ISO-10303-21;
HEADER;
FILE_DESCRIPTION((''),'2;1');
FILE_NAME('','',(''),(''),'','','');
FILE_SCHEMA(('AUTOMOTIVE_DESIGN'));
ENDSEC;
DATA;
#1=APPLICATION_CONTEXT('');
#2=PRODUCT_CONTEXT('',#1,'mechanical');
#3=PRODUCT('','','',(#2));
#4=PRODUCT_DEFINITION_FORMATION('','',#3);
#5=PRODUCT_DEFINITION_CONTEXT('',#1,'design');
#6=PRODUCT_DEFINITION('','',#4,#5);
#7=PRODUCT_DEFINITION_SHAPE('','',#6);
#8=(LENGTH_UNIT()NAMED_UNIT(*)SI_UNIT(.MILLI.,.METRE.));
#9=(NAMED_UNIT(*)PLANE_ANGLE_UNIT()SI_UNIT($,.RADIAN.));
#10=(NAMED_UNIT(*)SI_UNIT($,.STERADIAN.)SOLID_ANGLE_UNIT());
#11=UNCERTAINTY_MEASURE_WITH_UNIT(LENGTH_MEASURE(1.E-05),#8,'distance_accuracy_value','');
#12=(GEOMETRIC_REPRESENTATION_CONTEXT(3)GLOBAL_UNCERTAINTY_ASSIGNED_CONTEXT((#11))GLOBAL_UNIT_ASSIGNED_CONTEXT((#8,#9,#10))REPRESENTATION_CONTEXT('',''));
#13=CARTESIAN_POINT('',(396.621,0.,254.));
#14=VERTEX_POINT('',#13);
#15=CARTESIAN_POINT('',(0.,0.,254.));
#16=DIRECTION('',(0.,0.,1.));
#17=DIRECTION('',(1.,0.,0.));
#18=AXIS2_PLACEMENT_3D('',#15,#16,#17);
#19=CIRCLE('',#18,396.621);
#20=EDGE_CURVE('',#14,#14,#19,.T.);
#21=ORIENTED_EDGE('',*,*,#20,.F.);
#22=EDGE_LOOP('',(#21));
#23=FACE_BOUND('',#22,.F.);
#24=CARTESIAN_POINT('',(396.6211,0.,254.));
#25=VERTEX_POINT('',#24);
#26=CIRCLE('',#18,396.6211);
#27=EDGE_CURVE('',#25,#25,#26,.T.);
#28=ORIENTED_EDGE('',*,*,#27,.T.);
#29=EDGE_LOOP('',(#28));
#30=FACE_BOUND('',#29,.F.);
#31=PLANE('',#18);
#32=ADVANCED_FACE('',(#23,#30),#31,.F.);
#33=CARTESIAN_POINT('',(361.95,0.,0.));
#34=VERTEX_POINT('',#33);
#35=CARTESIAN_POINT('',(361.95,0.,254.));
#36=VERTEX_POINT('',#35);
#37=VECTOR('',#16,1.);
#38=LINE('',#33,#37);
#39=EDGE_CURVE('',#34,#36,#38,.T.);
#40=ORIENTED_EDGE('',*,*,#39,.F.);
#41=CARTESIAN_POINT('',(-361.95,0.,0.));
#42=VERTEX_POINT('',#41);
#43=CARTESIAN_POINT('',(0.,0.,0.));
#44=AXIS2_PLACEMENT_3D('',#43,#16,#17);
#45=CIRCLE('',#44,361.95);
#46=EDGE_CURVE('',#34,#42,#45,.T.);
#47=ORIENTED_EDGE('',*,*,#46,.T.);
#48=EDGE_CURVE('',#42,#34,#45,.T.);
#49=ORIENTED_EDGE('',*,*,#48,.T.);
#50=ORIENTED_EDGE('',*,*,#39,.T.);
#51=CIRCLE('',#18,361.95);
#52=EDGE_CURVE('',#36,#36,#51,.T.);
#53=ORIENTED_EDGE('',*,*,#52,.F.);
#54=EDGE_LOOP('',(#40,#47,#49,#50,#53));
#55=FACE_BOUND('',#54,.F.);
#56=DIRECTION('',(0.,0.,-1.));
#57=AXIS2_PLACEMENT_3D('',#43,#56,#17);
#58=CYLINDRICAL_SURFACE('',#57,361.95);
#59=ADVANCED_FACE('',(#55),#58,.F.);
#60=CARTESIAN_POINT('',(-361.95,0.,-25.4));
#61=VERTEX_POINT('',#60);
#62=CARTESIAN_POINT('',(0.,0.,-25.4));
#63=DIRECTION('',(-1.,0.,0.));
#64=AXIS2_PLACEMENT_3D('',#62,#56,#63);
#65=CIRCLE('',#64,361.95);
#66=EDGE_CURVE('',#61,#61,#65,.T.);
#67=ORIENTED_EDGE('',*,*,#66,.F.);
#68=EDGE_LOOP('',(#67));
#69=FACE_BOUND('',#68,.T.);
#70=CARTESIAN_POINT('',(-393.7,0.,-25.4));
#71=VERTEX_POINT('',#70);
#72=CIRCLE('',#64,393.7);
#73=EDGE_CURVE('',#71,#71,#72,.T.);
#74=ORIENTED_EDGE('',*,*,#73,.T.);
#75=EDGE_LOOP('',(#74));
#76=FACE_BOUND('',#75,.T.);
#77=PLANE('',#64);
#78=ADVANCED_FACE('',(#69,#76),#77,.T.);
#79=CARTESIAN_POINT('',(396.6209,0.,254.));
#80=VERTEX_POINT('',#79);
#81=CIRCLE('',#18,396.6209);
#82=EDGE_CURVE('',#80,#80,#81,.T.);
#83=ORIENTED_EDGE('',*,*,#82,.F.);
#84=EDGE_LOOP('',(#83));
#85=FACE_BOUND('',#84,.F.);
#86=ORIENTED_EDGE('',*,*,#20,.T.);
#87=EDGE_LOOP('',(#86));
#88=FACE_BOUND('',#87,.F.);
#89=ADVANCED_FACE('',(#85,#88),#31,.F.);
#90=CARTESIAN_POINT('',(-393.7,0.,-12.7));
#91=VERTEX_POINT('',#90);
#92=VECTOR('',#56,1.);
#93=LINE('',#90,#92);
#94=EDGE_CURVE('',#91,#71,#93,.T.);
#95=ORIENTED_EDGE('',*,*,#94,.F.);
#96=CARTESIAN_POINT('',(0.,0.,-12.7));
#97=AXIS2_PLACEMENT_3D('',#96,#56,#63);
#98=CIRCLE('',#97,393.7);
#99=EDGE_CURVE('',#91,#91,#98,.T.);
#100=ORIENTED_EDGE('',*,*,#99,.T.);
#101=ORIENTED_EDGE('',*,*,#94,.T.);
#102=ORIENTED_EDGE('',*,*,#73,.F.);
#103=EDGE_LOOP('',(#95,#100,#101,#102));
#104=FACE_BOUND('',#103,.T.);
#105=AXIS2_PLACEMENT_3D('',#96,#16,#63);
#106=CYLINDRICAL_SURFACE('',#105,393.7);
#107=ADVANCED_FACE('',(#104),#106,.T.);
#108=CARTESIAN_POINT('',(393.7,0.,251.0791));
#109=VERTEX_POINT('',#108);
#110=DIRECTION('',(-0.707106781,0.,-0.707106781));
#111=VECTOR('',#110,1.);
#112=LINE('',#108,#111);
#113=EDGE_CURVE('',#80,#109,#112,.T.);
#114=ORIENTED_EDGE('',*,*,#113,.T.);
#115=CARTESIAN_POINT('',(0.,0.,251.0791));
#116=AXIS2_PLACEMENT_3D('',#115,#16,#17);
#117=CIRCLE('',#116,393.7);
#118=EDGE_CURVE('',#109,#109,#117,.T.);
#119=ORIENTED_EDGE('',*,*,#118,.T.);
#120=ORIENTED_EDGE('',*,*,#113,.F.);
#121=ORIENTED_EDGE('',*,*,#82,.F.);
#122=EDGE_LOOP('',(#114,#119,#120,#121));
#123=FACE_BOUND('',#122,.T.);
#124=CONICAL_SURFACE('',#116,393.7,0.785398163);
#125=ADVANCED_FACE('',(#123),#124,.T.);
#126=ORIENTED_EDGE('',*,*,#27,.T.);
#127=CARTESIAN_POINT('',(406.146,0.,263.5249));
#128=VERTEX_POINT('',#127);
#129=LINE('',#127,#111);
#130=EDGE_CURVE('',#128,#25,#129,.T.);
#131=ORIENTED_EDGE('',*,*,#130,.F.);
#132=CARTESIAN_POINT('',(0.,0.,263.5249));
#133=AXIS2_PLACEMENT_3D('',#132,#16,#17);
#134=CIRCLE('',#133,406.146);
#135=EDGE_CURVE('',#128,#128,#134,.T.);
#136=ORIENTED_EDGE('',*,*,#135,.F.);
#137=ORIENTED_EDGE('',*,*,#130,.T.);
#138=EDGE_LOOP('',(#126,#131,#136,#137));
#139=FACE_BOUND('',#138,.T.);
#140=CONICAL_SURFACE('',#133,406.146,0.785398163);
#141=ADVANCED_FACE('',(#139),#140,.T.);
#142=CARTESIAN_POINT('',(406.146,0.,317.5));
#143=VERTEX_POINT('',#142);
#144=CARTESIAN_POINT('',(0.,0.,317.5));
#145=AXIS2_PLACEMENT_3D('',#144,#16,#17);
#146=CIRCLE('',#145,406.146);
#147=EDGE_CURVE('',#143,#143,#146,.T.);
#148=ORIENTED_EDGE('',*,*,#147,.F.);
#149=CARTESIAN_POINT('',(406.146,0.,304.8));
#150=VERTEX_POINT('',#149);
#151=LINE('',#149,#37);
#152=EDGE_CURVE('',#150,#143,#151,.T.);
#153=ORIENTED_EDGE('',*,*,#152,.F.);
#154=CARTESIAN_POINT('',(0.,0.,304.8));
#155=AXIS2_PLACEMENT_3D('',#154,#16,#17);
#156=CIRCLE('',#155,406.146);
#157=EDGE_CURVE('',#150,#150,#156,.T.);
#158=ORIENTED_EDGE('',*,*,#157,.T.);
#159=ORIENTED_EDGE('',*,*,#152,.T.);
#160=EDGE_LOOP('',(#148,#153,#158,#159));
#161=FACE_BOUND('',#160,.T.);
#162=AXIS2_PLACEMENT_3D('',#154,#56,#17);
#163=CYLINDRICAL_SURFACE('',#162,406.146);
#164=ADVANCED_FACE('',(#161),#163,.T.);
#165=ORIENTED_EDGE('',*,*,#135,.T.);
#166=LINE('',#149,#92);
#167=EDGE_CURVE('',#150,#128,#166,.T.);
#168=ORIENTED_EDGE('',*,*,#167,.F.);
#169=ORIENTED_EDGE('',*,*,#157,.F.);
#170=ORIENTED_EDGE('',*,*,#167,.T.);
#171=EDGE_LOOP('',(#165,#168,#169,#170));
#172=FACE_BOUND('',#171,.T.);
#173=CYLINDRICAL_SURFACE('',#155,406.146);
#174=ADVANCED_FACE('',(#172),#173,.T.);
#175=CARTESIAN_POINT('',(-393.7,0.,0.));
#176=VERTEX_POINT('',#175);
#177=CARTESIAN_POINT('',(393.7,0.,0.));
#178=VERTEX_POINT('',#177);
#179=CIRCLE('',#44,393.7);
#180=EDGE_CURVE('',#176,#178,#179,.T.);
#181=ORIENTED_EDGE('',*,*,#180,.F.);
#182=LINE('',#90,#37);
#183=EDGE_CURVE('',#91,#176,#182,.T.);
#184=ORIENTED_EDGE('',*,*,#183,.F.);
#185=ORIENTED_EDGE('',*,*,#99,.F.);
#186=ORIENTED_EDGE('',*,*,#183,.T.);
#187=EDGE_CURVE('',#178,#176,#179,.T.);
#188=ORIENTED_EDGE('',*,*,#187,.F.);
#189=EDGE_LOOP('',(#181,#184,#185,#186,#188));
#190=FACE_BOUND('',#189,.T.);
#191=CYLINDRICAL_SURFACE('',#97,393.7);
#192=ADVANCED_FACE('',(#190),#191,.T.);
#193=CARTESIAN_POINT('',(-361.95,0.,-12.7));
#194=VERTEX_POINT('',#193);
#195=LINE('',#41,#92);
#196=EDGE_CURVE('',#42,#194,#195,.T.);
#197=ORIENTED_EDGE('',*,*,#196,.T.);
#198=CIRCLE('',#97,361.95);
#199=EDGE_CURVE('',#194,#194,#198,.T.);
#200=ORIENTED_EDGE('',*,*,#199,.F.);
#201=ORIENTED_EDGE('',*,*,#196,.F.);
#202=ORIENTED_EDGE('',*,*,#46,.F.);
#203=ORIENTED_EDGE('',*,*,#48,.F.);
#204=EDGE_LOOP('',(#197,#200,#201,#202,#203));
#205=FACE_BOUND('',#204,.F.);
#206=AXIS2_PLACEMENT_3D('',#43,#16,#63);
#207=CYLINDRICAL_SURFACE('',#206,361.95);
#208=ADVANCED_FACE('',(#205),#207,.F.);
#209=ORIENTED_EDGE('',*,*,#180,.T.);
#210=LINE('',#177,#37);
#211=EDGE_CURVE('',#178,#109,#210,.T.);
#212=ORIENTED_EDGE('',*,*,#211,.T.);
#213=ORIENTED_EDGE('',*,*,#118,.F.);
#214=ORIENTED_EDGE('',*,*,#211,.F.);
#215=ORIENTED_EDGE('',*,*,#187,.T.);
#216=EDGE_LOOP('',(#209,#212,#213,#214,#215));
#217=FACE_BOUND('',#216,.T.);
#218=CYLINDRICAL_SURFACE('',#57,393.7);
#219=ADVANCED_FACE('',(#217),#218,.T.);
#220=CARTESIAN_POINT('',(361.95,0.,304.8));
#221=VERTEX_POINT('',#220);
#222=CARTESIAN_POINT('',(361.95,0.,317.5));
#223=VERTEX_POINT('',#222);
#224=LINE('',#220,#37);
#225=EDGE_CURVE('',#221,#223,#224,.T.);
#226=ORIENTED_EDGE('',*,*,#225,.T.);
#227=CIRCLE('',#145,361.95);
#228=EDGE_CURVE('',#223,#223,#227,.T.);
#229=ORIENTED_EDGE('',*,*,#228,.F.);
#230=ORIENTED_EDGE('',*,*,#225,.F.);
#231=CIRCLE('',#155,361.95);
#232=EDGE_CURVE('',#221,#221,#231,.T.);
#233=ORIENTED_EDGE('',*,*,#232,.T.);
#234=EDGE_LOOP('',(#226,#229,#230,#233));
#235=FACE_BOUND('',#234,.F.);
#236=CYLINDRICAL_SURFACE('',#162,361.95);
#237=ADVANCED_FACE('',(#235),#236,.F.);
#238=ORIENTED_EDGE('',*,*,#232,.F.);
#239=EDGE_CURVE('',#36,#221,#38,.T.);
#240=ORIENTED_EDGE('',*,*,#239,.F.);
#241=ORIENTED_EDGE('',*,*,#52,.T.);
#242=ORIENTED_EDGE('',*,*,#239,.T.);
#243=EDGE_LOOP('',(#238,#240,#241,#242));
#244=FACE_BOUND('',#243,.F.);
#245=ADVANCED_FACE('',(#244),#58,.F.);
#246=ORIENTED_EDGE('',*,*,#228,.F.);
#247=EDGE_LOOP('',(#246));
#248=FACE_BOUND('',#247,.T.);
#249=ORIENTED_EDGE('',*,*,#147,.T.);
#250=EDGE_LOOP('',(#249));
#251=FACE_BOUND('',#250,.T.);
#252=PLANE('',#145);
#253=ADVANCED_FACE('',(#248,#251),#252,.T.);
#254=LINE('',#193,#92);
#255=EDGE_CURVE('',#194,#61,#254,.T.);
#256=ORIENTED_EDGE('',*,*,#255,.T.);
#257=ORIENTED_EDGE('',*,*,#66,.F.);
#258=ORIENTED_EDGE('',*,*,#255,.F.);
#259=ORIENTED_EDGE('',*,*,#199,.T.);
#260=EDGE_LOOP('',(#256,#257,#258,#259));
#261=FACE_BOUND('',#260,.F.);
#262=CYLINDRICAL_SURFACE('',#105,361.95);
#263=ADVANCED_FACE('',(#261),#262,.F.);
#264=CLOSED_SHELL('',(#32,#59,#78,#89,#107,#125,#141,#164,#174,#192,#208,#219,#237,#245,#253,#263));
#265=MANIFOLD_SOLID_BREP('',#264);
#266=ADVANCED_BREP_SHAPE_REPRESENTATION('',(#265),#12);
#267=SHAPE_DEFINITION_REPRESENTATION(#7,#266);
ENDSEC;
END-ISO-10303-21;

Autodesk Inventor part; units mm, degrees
ref_plane "YZ Plane" through (0, 0, 0) normal (1, 0, 0) x (0, 1, 0)
ref_plane "XZ Plane" through (0, 0, 0) normal (0, 1, 0) x (-1, 0, 0)
ref_plane "XY Plane" through (0, 0, 0) normal (0, 0, 1) x (1, 0, 0)
sketch "Sketch1" plane through (0, 0, 0) normal (0, 0, 1) x (1, 0, 0)
  circle A0 centre (0, 0) radius 361.95
  circle A1 centre (0, 0) radius 393.7
  dimension "d0" = 723.9
  dimension "d1" = 787.4
extrude "Extrusion1" add sketch "Sketch1" along normal blind 304.8
sketch "Sketch2" plane through (0, 0, 304.8) normal (0, 0, 1) x (1, 0, 0)
  circle A0 centre (0, 0) radius 393.7 projected
  circle A1 centre (0, 0) radius 396.621
  circle A2 centre (0, 0) radius 399.796
  dimension "d4" = 793.242
  dimension "d5" = 799.592
extrude "Extrusion2" add sketch "Sketch2" against normal blind 50.8 contours A1
extrude "Extrusion3" add sketch "Sketch2" against normal blind 25.4 contours A2
chamfer "Chamfer1" distance 2.921 angle 45 1 edges at (-393.7, 0, 254)
sketch "Sketch3" plane through (0, 0, 0) normal (0, 0, -1) x (-1, 0, 0)
  circle A0 centre (0, 0) radius 380.746
  circle A1 centre (0, 0) radius 361.95 projected
  dimension "d13" = 761.492
extrude "Extrusion4" add sketch "Sketch3" along normal blind 12.7
fillet "Fillet1" radius 0.7937 2 edges at (380.746, 0, 0) (-396.621, 0, 279.4)
chamfer "Chamfer2" distance 0.7937 angle 45 1 edges at (380.746, 0, -12.7)
chamfer "Chamfer3" distance 0.7937 angle 45 1 edges at (-399.796, 0, 279.4)
sketch "Sketch4" plane through (0, 0, 0) normal (1, 0, 0) x (0, 1, 0)
  line L0 (396.621, 278.6062) -> (396.621, 254) construction
  line L1 (-399.796, 304.8) -> (399.796, 304.8) construction
  line L2 (396.621, 273.05) -> (394.8409, 271.2699)
  arc A0 (394.8409, 271.2699) -> (393.446, 267.9023) centre (398.2085, 267.9023) ccw
  line L3 (393.446, 267.9023) -> (393.446, 267.0852)
  arc A1 (393.446, 267.0852) -> (394.8409, 263.7176) centre (398.2085, 267.0852) ccw
  line L4 (394.8409, 263.7176) -> (396.621, 261.9375)
  line L5 (396.621, 261.9375) -> (396.621, 273.05)
  line L6 (0, -60.96) -> (0, 365.76) projected
  point P0 (0, 0)
  dimension "d23" = 11.1125
  dimension "d24" = 3.175
  dimension "d25" = 4.7625
  dimension "d26" = 31.75
  dimension "d27" = 45
revolve "Revolution1" cut sketch "Sketch4" angle 360 about axis through (0, 0, -10) along (0, 0, 1)
sketch "Sketch7" plane through (0, 0, -12.7) normal (0, 0, -1) x (-1, 0, 0)
  circle A0 centre (0, 0) radius 361.95 projected
  circle A1 centre (0, 0) radius 393.7 projected
extrude "Extrusion7" add sketch "Sketch7" along normal mid plane 25.4
sketch "Sketch8" plane through (0, 0, 304.8) normal (0, 0, 1) x (1, 0, 0)
  circle A0 centre (0, 0) radius 399.796 projected
  circle A1 centre (0, 0) radius 361.95 projected
  circle A2 centre (0, 0) radius 406.146
  dimension "d43" = 6.35
extrude "Extrusion8" add sketch "Sketch8" along normal blind 12.7 and the other way blind 50.8 contours A0 | A2
chamfer "Chamfer4" distance 9.525 angle 45 1 edges at (-406.146, 0, 254)
equation "\"d10\" = -0.5 * d1 + 0.5 * d4"
properties part number "A1-19037-200-06 HCWI liner - pup - as cast" material "Iron, HCWI"
